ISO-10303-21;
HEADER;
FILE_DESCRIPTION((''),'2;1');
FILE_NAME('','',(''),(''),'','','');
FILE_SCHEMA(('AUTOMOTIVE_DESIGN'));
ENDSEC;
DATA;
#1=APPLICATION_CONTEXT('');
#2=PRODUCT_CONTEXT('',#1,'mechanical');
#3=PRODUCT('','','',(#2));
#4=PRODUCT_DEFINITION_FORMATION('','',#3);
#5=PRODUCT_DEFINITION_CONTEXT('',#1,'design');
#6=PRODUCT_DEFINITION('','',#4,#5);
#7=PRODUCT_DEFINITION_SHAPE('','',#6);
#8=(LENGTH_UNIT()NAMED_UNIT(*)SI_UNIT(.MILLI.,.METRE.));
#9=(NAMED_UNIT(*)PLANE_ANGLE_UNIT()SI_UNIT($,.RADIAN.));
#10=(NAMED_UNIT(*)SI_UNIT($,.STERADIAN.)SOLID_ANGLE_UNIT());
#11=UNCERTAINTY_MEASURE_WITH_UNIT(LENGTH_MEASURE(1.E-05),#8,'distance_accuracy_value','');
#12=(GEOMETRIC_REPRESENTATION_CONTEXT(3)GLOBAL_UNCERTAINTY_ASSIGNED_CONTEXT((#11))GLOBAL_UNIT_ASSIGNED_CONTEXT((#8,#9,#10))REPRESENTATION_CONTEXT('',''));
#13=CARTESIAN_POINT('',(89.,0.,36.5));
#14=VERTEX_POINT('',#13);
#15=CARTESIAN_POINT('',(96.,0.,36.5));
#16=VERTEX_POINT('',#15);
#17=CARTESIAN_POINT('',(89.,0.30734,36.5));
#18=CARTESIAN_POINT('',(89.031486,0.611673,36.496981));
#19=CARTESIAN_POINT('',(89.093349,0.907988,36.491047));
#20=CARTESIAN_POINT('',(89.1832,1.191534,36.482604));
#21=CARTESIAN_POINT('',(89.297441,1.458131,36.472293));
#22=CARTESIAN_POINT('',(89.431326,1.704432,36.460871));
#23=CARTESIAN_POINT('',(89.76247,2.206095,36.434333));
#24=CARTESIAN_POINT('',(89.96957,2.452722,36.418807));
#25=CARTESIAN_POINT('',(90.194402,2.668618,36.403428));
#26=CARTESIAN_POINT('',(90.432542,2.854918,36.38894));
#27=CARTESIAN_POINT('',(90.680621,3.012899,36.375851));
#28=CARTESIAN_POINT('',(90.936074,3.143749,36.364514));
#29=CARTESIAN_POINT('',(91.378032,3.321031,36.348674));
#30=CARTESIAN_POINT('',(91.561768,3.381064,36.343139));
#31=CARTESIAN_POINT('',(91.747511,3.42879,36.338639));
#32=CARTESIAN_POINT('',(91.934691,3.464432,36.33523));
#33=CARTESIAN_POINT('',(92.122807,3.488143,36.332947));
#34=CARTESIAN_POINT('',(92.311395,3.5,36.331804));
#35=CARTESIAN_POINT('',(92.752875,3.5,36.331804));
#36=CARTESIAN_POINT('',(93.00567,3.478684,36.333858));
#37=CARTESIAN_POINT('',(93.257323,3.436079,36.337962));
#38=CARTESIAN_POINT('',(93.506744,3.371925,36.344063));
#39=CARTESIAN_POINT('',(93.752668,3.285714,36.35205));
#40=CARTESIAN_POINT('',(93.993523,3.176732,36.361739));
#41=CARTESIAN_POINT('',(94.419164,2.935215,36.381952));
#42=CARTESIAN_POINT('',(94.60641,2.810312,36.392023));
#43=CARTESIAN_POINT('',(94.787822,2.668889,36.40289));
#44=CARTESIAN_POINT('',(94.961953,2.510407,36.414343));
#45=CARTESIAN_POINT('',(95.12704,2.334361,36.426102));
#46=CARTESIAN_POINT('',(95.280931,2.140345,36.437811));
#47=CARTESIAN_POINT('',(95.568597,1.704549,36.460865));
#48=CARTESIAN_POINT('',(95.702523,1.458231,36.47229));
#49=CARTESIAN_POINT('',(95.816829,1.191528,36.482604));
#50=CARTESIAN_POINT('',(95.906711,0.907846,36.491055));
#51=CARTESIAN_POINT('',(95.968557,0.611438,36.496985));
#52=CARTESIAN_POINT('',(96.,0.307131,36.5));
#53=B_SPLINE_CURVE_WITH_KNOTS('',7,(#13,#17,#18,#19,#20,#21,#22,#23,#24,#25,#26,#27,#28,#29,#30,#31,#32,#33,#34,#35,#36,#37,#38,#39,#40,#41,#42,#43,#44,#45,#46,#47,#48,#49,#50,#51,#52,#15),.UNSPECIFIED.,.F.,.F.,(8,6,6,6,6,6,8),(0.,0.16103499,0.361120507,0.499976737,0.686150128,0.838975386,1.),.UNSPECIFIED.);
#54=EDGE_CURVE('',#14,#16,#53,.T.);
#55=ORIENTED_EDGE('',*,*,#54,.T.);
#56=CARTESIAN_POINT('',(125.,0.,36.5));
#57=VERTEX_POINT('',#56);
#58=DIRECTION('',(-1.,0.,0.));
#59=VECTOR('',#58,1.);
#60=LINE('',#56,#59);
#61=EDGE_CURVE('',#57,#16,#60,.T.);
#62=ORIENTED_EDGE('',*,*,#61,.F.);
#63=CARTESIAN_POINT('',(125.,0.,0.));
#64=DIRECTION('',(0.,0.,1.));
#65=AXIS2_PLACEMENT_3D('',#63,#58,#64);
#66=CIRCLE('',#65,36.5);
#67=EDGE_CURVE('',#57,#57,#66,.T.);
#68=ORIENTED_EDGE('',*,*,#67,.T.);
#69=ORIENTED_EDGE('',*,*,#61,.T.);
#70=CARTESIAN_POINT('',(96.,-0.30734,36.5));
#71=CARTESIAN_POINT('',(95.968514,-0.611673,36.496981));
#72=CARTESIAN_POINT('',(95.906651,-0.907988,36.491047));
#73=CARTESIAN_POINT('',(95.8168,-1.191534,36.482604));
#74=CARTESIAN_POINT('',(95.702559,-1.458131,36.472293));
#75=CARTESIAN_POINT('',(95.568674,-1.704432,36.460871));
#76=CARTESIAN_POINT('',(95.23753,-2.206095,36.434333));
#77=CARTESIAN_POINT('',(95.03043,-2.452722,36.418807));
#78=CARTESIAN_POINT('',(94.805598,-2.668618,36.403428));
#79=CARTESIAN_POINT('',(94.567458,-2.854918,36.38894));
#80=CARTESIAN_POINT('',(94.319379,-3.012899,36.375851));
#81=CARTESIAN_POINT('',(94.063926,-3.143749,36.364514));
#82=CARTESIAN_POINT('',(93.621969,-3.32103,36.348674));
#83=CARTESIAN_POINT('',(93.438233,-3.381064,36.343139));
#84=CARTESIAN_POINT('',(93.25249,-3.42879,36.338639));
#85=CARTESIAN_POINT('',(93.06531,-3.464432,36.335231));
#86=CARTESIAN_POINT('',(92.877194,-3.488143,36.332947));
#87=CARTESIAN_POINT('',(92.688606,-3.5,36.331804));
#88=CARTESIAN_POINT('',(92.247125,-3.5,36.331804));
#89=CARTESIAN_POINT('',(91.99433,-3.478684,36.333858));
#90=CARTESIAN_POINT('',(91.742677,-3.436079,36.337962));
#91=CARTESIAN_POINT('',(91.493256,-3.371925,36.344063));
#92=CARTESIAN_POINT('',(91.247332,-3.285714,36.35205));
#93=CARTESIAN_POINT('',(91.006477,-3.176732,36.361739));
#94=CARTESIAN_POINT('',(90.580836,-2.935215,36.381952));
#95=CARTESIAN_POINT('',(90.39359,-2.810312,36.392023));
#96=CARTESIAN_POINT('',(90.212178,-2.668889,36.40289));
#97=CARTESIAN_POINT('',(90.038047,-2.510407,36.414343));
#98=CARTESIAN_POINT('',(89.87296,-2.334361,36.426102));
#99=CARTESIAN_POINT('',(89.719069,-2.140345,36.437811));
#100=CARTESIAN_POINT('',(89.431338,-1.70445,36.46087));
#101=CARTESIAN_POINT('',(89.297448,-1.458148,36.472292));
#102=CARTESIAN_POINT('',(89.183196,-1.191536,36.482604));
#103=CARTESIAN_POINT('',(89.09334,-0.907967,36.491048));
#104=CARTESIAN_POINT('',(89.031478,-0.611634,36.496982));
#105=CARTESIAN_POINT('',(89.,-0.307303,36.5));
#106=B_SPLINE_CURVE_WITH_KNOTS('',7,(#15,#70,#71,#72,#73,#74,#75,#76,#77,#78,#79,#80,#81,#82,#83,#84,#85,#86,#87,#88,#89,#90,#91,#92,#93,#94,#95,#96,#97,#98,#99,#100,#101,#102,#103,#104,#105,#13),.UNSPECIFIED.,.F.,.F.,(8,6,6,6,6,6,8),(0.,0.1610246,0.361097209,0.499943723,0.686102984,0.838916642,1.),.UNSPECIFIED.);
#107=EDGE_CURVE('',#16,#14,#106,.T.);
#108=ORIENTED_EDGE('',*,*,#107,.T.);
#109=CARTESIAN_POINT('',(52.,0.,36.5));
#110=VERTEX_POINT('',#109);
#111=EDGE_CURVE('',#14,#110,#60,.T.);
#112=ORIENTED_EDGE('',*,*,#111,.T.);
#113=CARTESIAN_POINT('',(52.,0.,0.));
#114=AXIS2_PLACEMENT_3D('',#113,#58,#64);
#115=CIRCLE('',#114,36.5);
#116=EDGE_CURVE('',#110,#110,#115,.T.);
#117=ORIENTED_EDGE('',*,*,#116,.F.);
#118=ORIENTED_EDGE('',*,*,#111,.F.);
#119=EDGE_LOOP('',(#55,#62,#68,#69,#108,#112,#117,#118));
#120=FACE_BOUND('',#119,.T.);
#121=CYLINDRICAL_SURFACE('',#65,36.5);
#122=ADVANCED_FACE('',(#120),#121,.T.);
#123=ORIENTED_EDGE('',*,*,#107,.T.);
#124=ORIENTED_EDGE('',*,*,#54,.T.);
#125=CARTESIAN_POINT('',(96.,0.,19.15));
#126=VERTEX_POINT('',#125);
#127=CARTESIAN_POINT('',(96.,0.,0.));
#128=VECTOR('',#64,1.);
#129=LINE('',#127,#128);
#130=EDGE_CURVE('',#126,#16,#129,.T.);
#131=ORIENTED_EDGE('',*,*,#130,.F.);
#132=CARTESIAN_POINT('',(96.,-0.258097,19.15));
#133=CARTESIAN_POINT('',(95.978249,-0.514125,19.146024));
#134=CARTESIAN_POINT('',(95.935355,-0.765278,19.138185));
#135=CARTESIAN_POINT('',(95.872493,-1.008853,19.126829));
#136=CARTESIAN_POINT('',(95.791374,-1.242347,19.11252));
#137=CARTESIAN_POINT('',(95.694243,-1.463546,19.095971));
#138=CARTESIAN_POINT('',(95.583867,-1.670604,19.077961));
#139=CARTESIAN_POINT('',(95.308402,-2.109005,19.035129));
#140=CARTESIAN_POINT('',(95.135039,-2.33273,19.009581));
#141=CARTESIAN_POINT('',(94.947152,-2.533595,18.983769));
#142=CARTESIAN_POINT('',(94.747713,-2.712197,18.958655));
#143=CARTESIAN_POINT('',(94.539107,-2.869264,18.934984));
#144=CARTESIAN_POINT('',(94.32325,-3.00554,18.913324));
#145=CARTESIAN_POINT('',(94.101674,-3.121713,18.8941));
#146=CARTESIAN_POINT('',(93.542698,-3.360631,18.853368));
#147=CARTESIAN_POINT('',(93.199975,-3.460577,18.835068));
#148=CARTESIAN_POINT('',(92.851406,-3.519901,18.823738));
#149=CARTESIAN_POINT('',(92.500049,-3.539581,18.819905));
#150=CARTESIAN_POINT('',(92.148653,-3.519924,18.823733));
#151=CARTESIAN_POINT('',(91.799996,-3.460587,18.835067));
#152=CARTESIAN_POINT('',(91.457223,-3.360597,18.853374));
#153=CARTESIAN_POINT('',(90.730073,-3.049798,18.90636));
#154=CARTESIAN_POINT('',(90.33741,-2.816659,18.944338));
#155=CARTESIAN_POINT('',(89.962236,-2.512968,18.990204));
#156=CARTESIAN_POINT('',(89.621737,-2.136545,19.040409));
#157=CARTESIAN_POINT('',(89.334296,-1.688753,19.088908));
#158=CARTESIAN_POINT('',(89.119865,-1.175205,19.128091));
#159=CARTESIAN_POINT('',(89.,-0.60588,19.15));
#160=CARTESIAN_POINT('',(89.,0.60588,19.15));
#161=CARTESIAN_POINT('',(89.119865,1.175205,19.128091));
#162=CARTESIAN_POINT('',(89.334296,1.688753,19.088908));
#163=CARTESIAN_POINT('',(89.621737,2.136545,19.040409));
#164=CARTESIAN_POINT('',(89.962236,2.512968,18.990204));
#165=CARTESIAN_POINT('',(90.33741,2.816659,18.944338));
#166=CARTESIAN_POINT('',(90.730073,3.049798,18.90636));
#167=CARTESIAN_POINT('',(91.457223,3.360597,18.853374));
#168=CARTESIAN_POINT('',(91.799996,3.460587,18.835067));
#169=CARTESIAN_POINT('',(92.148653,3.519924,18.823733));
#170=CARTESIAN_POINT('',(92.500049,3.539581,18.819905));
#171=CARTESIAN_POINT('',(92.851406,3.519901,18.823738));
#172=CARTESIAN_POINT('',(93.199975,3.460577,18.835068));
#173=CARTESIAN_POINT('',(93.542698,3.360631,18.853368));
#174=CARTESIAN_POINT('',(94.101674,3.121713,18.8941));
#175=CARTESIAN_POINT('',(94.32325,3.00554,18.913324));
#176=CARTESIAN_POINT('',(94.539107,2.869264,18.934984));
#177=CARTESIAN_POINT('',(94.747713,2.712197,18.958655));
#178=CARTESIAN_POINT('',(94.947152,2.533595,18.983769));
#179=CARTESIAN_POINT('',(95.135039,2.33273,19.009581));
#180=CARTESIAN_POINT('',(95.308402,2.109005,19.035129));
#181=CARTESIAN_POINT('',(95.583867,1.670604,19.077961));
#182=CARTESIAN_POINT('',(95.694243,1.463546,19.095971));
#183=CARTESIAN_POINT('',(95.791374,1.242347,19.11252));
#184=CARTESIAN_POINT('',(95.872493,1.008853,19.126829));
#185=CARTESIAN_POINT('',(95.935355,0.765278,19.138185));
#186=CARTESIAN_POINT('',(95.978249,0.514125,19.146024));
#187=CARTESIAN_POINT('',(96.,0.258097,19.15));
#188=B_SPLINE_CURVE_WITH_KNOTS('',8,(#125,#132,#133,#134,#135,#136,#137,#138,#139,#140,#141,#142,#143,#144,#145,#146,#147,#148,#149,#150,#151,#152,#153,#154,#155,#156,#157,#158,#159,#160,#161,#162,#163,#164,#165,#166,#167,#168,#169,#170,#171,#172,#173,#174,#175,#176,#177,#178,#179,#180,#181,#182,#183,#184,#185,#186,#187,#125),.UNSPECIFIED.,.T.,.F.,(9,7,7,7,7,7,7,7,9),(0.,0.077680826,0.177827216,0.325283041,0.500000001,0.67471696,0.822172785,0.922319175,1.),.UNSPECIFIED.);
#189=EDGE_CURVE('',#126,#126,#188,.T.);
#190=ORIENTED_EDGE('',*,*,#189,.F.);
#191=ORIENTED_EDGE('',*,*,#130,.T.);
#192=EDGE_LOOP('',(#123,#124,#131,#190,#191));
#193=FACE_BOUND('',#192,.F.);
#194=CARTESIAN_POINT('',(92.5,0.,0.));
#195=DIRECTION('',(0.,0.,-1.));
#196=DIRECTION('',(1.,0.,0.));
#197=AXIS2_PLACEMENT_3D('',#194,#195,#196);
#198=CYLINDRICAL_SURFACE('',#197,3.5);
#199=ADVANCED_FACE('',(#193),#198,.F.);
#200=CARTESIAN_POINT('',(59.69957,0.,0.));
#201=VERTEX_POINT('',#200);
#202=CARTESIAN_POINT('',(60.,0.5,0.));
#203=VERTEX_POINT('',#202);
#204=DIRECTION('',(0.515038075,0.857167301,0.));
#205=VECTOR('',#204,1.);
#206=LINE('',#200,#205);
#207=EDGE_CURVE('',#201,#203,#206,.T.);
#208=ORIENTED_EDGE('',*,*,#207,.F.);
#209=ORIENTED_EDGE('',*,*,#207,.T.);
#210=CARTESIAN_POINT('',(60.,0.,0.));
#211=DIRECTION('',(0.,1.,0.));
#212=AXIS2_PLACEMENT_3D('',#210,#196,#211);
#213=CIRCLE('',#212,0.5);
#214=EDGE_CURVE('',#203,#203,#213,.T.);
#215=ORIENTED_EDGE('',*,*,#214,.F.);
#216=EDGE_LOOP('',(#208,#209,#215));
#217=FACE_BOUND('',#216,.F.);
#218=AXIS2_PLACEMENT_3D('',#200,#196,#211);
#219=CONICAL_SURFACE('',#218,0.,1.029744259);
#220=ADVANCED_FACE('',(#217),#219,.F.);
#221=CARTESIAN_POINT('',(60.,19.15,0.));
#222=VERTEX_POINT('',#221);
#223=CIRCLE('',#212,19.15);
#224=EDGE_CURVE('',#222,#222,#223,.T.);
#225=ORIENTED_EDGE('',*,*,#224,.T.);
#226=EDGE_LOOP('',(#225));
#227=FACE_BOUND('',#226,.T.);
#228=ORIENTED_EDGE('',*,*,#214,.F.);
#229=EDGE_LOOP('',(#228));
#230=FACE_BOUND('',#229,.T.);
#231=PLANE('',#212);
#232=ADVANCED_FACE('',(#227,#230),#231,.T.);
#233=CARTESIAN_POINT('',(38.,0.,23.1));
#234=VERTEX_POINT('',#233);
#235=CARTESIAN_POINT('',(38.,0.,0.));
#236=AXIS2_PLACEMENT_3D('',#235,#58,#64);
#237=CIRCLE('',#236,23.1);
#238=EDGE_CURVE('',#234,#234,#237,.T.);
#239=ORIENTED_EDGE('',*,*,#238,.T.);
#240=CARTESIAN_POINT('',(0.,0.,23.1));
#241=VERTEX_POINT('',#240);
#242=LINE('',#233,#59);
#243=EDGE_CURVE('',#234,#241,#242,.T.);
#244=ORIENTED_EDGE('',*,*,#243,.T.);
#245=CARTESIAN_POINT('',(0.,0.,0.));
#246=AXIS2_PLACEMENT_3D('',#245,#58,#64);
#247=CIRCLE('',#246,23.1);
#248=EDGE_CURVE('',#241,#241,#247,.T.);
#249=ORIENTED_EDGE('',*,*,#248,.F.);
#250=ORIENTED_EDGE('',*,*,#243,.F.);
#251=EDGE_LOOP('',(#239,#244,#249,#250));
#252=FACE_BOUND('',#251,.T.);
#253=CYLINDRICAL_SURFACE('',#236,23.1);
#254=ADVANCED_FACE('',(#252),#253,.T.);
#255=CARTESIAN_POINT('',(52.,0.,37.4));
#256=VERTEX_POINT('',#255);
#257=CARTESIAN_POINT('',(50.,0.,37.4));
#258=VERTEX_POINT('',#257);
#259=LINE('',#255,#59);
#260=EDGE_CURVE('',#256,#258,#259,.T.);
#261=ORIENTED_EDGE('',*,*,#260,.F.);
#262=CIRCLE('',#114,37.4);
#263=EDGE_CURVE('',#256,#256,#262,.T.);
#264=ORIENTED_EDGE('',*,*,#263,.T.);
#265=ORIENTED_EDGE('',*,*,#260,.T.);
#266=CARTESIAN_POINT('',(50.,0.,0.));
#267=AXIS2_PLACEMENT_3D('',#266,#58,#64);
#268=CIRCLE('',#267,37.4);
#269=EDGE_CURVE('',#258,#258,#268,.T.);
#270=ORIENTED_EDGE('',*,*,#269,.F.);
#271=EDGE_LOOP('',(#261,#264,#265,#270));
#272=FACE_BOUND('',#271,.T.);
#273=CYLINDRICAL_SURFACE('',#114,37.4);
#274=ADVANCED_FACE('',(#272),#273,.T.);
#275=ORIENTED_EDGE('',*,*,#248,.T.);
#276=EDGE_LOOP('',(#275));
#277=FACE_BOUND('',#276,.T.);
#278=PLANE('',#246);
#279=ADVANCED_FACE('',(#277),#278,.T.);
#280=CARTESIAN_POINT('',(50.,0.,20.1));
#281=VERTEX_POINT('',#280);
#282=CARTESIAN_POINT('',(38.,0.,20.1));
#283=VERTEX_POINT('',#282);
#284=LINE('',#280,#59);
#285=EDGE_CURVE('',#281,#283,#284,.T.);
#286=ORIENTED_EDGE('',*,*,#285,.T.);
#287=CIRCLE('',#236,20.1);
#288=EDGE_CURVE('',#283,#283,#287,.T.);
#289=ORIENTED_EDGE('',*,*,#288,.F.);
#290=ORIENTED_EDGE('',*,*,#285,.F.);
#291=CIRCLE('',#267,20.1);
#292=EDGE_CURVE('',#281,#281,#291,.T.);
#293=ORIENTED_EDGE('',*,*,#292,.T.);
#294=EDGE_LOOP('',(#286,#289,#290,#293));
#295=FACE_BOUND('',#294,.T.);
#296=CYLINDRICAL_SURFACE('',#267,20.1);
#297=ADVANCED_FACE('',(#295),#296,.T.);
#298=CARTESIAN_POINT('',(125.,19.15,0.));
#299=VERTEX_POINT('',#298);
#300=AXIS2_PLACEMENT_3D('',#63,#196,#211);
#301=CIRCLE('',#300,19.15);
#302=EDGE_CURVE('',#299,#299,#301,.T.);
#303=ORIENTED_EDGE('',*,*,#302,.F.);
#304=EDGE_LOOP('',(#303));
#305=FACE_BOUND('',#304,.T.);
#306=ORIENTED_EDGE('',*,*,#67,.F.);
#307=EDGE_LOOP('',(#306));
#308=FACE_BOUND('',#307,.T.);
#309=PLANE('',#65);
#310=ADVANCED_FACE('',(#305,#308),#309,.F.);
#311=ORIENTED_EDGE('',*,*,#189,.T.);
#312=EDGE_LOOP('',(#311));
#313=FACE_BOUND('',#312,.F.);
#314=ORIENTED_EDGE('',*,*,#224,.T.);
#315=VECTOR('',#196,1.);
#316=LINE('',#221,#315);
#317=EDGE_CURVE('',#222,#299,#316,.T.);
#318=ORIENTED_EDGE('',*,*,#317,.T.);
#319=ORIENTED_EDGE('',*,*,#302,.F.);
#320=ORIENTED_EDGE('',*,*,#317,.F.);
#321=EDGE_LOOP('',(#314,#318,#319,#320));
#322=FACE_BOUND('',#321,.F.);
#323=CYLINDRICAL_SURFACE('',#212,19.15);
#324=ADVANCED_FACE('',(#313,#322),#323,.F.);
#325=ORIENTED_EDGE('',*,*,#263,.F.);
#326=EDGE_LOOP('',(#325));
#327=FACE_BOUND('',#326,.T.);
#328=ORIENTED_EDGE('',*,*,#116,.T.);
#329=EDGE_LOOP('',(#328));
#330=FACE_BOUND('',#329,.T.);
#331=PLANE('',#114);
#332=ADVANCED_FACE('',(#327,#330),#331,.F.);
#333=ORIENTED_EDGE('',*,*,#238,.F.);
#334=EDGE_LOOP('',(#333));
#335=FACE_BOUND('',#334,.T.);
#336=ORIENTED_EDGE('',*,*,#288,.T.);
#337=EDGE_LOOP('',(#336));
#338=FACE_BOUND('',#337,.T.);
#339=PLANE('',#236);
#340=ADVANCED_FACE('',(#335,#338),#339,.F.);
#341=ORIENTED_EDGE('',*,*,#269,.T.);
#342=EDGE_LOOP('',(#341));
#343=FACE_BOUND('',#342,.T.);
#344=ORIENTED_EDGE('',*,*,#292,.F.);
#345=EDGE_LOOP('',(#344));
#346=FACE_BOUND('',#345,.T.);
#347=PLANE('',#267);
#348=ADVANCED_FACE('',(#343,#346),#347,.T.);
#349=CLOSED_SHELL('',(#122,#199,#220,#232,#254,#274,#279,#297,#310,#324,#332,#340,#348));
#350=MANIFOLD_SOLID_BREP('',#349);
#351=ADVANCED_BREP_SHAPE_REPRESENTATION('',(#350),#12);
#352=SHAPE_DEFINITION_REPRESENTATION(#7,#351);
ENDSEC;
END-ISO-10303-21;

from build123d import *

# Parameters (mm, degrees)
F3_D           = 1
F3_DEPTH       = 65
F3_CBORE_D     = 38.3
F3_CBORE_DEPTH = 65
F3_TIP         = 0.3004303095
F5_D           = 7
F5_DEPTH       = 37.401


# Not quite as in the source:
# - a feature names something its author has since deleted; it is built from what else it names


with BuildPart() as f1:
    # F0 (on Front) → F1 (revolve)
    with BuildSketch(Plane.XZ):
        Polygon((0, 23.1), (0, 0), (125, 0), (125, 36.5), (52, 36.5), (52, 37.4), (50, 37.4), (50, 36.5), (50, 20.1), (38, 20.1), (38, 23.1), align=None)
    revolve(axis=Axis((62.5, 0, 0), (-1, 0, 0)))

    # F3
    with Locations(Plane.YZ.offset(125)):
        with Locations((0, 0)):
            CounterBoreHole(F3_D / 2, F3_CBORE_D / 2, F3_CBORE_DEPTH, depth=F3_DEPTH)
            with Locations((0, 0, -(F3_DEPTH + F3_TIP / 2))):  # 118° drill point
                Cone(0, F3_D / 2, F3_TIP, mode=Mode.SUBTRACT)

    # F5 (through all, one way)
    with BuildSketch(Plane(origin=(0, 0, 0), x_dir=(1, 0, 0), z_dir=(0, 0, -1))):
        with Locations((92.5, 0)):
            Circle(F5_D / 2)
    extrude(amount=-F5_DEPTH, mode=Mode.SUBTRACT)


solid = f1.part
